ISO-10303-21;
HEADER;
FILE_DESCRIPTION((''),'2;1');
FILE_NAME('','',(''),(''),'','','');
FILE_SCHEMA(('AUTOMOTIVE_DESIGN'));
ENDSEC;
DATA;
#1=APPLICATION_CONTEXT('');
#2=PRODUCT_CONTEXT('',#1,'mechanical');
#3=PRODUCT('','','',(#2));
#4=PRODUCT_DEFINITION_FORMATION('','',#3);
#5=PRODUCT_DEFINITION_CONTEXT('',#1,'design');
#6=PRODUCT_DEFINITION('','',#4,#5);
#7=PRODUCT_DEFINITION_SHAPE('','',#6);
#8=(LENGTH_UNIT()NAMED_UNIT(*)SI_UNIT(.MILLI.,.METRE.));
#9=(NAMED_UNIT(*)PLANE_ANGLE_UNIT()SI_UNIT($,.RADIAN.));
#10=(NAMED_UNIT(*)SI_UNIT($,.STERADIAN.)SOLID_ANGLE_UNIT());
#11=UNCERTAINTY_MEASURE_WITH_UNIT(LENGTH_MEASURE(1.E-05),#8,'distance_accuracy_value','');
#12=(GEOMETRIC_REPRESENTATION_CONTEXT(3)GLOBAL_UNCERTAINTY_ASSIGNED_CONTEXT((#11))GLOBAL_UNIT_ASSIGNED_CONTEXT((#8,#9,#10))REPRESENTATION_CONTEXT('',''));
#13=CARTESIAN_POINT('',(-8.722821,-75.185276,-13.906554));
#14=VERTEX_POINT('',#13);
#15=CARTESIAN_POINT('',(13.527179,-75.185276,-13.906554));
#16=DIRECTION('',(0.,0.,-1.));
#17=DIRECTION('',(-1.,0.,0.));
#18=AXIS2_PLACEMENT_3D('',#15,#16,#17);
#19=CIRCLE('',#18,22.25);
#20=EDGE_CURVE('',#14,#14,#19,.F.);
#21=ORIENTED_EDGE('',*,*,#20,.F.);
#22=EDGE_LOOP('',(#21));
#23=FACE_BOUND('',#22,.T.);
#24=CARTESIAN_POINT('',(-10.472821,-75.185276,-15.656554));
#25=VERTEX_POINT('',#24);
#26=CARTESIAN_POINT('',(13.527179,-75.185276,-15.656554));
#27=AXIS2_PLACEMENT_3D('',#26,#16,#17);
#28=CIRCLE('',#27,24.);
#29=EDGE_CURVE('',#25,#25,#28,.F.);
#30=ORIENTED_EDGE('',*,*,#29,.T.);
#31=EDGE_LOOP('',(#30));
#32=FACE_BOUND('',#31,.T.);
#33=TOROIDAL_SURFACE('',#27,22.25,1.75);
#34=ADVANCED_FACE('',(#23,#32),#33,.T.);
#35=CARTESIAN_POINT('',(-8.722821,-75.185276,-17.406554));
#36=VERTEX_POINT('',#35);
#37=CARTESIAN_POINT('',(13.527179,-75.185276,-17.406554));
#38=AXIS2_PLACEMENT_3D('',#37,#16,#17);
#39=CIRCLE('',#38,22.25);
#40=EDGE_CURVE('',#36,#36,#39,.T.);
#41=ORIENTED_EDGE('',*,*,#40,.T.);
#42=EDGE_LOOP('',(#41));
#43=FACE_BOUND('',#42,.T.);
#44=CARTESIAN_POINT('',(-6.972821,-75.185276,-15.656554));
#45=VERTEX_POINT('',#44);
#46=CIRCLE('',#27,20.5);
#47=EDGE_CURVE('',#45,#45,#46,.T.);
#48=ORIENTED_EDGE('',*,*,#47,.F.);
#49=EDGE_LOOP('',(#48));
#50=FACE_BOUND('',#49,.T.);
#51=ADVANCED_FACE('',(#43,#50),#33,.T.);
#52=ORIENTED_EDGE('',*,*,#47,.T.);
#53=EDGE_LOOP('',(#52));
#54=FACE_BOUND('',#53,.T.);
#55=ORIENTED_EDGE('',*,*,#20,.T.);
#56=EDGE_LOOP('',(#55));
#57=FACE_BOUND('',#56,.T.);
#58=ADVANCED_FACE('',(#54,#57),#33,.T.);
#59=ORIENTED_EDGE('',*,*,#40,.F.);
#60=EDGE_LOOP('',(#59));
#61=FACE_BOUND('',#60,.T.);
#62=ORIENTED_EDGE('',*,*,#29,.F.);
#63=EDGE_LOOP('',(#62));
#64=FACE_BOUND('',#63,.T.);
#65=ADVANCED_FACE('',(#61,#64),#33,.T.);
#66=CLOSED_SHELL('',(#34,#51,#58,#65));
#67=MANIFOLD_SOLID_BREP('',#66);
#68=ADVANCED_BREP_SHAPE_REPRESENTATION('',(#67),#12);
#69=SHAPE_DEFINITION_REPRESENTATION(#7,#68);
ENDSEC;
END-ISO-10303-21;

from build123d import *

# Parameters (mm, degrees)
SKETCH7_R           = 24
SKETCH7_R_2         = 20.5
BOSS_EXTRUDE6_DEPTH = 3.5
FILLET4_R           = 1.75


with BuildPart() as part:
    # Sketch7 → Boss-Extrude6 (new body)
    with BuildSketch(Plane(origin=(-0.280788986, 0.442554621, -13.906554041), x_dir=(-1, 0, 0), z_dir=(0, 0, -1))):
        with Locations((-13.807967582, -75.62783073)):
            Circle(SKETCH7_R)
        with Locations((-13.807967582, -75.62783073)):
            Circle(SKETCH7_R_2, mode=Mode.SUBTRACT)
    extrude(amount=BOSS_EXTRUDE6_DEPTH)

    # Fillet4
    fillet4_edges = [part.edges().sort_by_distance(p)[0] for p in [
        (37.527178596, -75.18527611, -13.906554041),
        (37.527178596, -75.18527611, -17.406554041),
        (34.027178596, -75.18527611, -13.906554041),
        (34.027178596, -75.18527611, -17.406554041),
    ]]
    fillet(fillet4_edges, radius=FILLET4_R - 0.0001)  # a hair under: the kernel refuses the full size


solid = part.part
